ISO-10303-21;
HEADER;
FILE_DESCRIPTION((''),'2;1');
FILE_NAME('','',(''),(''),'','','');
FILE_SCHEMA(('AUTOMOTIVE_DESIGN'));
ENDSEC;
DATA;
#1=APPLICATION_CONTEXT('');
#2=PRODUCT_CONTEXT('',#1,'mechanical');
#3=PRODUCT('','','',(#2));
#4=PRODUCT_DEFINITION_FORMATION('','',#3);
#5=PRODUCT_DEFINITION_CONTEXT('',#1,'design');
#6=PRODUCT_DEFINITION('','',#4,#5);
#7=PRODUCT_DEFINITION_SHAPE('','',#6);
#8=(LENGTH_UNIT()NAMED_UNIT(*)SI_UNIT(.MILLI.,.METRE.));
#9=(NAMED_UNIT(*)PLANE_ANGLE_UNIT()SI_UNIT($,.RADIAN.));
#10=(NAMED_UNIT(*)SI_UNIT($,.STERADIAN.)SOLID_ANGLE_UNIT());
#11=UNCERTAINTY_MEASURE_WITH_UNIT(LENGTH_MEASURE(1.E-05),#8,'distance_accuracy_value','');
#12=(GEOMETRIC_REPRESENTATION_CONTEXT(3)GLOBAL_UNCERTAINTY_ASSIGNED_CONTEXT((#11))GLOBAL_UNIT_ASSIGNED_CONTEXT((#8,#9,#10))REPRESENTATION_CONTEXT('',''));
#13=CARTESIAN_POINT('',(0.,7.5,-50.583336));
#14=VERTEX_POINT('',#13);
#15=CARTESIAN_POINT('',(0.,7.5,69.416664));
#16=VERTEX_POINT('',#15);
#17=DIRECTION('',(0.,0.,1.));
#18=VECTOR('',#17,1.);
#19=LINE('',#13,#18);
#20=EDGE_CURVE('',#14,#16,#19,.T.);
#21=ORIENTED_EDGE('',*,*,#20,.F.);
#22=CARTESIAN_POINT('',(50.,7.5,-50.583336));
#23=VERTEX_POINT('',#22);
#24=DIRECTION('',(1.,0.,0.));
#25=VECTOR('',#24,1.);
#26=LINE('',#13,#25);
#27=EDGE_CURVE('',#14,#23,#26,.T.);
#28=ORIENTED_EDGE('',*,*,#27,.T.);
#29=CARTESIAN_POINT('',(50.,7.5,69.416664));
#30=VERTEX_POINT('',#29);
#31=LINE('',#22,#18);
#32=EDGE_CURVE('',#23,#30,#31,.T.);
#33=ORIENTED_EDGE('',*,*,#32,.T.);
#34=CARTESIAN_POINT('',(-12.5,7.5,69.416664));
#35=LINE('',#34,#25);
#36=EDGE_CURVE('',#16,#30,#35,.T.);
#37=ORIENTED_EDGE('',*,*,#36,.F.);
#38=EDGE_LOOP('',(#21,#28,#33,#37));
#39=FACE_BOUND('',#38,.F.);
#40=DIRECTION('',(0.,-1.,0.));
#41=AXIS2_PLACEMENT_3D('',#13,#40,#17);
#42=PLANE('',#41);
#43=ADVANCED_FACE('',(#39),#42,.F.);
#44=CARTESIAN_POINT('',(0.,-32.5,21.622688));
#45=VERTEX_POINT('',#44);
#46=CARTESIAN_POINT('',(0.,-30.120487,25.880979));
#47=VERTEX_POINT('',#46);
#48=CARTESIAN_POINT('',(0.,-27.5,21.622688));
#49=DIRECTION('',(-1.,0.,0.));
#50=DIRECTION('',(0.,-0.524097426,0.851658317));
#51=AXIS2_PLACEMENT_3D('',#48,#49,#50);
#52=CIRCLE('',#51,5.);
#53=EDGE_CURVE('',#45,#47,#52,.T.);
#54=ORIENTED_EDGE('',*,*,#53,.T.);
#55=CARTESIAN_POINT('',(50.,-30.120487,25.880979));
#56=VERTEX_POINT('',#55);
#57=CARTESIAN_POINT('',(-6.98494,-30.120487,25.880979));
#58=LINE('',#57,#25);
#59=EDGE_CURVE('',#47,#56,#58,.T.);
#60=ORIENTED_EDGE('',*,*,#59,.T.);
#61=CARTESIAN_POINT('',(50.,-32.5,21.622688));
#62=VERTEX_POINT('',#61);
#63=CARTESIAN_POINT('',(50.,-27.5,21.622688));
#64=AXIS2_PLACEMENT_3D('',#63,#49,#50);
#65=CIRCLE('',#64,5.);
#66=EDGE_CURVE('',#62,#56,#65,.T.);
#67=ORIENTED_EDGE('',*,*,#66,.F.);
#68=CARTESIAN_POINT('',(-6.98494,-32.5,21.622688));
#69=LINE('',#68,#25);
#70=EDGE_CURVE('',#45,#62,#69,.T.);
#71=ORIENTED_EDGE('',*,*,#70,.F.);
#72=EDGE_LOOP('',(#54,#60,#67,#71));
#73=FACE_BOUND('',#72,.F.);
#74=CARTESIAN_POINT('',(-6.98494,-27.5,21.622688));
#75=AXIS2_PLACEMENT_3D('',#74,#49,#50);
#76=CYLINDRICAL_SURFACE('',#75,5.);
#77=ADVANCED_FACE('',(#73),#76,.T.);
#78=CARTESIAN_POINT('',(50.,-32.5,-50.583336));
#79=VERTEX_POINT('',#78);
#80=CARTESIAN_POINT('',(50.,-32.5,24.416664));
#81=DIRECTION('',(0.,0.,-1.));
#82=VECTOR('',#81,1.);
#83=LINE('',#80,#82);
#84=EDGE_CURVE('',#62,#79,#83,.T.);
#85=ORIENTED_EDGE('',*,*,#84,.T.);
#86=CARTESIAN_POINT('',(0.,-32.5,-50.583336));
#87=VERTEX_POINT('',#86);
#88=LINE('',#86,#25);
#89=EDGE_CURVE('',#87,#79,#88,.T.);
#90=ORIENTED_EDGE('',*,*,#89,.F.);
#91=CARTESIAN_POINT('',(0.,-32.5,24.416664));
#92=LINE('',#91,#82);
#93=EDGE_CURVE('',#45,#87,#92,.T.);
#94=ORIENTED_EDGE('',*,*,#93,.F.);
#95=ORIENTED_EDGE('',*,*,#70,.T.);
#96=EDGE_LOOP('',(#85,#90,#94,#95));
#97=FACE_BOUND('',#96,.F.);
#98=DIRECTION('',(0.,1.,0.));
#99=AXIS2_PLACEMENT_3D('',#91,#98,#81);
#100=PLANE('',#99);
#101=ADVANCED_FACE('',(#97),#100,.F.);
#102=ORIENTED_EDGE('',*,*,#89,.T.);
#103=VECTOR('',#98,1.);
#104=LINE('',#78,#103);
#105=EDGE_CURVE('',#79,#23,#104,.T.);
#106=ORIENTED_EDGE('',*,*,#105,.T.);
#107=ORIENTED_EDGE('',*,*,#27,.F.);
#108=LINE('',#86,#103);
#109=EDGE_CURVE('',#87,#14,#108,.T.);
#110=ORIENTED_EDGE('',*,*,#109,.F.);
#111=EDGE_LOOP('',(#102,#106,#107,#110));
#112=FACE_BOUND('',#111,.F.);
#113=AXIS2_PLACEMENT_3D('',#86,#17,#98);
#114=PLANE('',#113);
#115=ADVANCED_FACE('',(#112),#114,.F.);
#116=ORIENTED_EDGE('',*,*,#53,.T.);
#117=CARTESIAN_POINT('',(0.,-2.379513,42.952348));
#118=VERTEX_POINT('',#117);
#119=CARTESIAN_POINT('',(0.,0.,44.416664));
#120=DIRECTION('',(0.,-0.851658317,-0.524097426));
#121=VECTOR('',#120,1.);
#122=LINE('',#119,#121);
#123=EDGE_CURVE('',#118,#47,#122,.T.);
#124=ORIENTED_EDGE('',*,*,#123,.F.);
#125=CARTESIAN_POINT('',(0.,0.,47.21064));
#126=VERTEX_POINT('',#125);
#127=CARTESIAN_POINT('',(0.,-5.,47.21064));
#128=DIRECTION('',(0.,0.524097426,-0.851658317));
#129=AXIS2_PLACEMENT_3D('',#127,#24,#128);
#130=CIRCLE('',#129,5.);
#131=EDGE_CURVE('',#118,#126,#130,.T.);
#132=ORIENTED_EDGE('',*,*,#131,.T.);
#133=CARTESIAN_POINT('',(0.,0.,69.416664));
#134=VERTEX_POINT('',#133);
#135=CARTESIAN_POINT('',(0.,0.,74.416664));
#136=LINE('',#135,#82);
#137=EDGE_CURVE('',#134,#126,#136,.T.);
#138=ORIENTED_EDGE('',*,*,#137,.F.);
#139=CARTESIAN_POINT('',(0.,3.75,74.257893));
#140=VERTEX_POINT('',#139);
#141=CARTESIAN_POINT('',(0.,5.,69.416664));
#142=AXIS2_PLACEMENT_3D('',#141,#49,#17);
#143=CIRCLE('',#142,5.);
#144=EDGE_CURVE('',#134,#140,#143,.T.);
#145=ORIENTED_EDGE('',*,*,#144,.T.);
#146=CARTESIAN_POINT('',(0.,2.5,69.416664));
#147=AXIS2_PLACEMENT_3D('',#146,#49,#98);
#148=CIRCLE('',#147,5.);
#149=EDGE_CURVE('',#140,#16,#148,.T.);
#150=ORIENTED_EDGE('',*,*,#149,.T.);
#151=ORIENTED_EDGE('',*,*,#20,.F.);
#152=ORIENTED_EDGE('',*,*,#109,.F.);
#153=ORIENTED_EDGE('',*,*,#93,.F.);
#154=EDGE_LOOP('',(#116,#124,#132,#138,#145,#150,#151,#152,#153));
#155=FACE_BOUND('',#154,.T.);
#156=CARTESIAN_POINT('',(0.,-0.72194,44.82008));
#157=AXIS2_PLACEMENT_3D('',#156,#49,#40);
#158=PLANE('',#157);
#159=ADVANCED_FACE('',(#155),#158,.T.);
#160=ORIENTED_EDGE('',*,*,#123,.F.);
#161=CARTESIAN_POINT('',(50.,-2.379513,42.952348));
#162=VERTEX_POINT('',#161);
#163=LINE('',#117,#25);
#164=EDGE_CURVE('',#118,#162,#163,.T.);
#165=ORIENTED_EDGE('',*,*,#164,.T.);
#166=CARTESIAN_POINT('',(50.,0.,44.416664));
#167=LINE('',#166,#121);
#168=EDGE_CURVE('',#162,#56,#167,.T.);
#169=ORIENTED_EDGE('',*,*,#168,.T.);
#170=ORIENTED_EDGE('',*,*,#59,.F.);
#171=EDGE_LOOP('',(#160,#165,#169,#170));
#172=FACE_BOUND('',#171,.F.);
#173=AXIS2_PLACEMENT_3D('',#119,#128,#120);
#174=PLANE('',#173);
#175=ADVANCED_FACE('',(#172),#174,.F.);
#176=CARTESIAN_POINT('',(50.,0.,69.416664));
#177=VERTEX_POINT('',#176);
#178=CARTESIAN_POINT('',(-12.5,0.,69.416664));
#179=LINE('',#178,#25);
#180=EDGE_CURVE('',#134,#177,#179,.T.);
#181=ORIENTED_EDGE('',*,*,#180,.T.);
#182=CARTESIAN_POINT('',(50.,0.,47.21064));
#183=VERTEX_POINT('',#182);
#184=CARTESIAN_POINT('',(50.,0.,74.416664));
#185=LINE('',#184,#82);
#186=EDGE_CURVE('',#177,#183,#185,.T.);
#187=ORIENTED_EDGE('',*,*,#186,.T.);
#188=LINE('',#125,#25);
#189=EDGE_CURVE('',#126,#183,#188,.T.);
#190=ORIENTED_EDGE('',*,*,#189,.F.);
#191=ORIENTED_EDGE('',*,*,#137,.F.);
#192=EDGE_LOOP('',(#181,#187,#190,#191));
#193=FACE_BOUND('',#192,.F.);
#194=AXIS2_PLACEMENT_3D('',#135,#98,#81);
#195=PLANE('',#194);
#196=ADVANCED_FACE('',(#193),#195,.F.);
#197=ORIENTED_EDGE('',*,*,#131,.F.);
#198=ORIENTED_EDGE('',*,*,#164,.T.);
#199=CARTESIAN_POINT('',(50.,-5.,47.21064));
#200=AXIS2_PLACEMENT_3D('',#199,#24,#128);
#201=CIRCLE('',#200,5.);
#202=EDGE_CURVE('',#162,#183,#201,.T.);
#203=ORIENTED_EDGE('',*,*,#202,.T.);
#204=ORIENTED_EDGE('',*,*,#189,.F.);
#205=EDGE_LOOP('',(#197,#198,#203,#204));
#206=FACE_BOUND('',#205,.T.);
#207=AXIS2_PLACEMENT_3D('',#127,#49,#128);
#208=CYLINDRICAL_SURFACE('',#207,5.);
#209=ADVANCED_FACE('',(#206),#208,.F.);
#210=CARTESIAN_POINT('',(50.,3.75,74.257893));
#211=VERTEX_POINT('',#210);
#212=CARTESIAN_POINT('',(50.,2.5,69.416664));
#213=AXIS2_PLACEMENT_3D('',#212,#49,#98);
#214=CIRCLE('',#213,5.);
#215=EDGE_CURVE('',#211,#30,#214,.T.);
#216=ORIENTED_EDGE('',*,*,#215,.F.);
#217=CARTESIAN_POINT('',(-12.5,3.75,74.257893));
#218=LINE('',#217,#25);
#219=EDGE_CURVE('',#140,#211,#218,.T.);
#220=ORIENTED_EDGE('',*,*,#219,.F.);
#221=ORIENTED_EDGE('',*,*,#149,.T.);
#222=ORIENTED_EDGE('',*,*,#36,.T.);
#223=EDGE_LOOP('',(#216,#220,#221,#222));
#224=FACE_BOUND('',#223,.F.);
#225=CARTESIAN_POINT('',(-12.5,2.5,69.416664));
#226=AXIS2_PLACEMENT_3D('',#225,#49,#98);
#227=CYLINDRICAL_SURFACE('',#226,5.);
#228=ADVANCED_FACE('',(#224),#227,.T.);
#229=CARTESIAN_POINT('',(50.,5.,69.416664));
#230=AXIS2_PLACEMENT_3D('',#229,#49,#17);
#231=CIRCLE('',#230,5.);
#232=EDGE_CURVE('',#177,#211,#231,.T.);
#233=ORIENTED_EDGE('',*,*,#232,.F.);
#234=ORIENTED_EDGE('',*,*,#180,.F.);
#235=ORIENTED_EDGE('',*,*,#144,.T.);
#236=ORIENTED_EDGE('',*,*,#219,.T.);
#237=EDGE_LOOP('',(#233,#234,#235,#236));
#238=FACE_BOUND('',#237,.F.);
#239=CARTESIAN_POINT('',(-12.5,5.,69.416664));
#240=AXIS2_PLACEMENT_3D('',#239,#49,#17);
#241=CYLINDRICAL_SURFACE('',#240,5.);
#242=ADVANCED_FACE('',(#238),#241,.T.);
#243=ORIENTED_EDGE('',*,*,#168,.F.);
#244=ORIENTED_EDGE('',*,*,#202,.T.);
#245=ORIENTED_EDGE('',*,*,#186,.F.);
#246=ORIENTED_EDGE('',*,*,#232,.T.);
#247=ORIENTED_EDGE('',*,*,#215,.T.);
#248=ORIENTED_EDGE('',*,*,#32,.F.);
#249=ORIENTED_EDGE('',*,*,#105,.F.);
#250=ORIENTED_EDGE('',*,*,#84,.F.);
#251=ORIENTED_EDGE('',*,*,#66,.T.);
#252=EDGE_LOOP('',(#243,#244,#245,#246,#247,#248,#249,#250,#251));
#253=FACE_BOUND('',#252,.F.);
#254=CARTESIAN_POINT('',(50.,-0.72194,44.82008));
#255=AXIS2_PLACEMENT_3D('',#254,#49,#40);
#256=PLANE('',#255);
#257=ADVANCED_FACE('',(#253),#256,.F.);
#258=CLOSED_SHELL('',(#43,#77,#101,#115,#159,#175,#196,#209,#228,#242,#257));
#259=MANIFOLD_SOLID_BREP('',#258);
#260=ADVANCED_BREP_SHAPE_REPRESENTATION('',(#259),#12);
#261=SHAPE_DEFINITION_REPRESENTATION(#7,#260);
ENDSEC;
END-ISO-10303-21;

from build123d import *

# Parameters (mm, degrees)
F1_DEPTH    = 50
F2_T1_DEPTH = 50
F2_T3_DEPTH = 75
F2_T5_DEPTH = 63.9698798509


# Not quite as in the source:
# - a fillet or chamfer that OpenCascade refuses, or shapes differently, is made with other operations: its cross-section is extruded or revolved along the edge and cut away or added


with BuildPart() as f1:
    # F0 (on Right) → F1 (new body)
    with BuildSketch(Plane.YZ):
        Polygon((-32.5, 24.4166636232), (-32.5, -50.5833363768), (7.5, -50.5833363768), (7.5, 74.4166636232), (0, 74.4166636232), (0, 44.4166636232), align=None)
    extrude(amount=F1_DEPTH)

    # F2: fillet of radius 5 on 4 edges, made by hand

    # F2_s2 → F2_t1 (join)
    with BuildSketch(Plane.YZ):
        with BuildLine():
            ThreePointArc((-2.3795128717, 42.9523480098), (-0.6352299235, 44.7716270515), (0, 47.2106395933))
            Line((0, 47.2106395933), (0, 44.4166636232))
            Line((0, 44.4166636232), (-2.3795128717, 42.9523480098))
        make_face()
    extrude(amount=F2_T1_DEPTH)

    # F2_s4 → F2_t3 (cut)
    with BuildSketch(Plane.YZ.offset(-12.5)):
        with BuildLine():
            ThreePointArc((5, 74.4166636232), (1.4644660941, 72.9521975291), (0, 69.4166636232))
            Line((0, 69.4166636232), (0, 74.4166636232))
            Line((0, 74.4166636232), (5, 74.4166636232))
        make_face()
        with BuildLine():
            ThreePointArc((7.5, 69.4166636232), (6.0355339059, 72.9521975291), (2.5, 74.4166636232))
            Line((2.5, 74.4166636232), (7.5, 74.4166636232))
            Line((7.5, 74.4166636232), (7.5, 69.4166636232))
        make_face()
    extrude(amount=F2_T3_DEPTH, mode=Mode.SUBTRACT)

    # F2_s6 → F2_t5 (cut)
    with BuildSketch(Plane.YZ.offset(-6.9849399255)):
        with BuildLine():
            ThreePointArc((-30.1204871283, 25.8809792365), (-31.8647700765, 24.0617001948), (-32.5, 21.622687653))
            Line((-32.5, 21.622687653), (-32.5, 24.4166636232))
            Line((-32.5, 24.4166636232), (-30.1204871283, 25.8809792365))
        make_face()
    extrude(amount=F2_T5_DEPTH, mode=Mode.SUBTRACT)


solid = f1.part
